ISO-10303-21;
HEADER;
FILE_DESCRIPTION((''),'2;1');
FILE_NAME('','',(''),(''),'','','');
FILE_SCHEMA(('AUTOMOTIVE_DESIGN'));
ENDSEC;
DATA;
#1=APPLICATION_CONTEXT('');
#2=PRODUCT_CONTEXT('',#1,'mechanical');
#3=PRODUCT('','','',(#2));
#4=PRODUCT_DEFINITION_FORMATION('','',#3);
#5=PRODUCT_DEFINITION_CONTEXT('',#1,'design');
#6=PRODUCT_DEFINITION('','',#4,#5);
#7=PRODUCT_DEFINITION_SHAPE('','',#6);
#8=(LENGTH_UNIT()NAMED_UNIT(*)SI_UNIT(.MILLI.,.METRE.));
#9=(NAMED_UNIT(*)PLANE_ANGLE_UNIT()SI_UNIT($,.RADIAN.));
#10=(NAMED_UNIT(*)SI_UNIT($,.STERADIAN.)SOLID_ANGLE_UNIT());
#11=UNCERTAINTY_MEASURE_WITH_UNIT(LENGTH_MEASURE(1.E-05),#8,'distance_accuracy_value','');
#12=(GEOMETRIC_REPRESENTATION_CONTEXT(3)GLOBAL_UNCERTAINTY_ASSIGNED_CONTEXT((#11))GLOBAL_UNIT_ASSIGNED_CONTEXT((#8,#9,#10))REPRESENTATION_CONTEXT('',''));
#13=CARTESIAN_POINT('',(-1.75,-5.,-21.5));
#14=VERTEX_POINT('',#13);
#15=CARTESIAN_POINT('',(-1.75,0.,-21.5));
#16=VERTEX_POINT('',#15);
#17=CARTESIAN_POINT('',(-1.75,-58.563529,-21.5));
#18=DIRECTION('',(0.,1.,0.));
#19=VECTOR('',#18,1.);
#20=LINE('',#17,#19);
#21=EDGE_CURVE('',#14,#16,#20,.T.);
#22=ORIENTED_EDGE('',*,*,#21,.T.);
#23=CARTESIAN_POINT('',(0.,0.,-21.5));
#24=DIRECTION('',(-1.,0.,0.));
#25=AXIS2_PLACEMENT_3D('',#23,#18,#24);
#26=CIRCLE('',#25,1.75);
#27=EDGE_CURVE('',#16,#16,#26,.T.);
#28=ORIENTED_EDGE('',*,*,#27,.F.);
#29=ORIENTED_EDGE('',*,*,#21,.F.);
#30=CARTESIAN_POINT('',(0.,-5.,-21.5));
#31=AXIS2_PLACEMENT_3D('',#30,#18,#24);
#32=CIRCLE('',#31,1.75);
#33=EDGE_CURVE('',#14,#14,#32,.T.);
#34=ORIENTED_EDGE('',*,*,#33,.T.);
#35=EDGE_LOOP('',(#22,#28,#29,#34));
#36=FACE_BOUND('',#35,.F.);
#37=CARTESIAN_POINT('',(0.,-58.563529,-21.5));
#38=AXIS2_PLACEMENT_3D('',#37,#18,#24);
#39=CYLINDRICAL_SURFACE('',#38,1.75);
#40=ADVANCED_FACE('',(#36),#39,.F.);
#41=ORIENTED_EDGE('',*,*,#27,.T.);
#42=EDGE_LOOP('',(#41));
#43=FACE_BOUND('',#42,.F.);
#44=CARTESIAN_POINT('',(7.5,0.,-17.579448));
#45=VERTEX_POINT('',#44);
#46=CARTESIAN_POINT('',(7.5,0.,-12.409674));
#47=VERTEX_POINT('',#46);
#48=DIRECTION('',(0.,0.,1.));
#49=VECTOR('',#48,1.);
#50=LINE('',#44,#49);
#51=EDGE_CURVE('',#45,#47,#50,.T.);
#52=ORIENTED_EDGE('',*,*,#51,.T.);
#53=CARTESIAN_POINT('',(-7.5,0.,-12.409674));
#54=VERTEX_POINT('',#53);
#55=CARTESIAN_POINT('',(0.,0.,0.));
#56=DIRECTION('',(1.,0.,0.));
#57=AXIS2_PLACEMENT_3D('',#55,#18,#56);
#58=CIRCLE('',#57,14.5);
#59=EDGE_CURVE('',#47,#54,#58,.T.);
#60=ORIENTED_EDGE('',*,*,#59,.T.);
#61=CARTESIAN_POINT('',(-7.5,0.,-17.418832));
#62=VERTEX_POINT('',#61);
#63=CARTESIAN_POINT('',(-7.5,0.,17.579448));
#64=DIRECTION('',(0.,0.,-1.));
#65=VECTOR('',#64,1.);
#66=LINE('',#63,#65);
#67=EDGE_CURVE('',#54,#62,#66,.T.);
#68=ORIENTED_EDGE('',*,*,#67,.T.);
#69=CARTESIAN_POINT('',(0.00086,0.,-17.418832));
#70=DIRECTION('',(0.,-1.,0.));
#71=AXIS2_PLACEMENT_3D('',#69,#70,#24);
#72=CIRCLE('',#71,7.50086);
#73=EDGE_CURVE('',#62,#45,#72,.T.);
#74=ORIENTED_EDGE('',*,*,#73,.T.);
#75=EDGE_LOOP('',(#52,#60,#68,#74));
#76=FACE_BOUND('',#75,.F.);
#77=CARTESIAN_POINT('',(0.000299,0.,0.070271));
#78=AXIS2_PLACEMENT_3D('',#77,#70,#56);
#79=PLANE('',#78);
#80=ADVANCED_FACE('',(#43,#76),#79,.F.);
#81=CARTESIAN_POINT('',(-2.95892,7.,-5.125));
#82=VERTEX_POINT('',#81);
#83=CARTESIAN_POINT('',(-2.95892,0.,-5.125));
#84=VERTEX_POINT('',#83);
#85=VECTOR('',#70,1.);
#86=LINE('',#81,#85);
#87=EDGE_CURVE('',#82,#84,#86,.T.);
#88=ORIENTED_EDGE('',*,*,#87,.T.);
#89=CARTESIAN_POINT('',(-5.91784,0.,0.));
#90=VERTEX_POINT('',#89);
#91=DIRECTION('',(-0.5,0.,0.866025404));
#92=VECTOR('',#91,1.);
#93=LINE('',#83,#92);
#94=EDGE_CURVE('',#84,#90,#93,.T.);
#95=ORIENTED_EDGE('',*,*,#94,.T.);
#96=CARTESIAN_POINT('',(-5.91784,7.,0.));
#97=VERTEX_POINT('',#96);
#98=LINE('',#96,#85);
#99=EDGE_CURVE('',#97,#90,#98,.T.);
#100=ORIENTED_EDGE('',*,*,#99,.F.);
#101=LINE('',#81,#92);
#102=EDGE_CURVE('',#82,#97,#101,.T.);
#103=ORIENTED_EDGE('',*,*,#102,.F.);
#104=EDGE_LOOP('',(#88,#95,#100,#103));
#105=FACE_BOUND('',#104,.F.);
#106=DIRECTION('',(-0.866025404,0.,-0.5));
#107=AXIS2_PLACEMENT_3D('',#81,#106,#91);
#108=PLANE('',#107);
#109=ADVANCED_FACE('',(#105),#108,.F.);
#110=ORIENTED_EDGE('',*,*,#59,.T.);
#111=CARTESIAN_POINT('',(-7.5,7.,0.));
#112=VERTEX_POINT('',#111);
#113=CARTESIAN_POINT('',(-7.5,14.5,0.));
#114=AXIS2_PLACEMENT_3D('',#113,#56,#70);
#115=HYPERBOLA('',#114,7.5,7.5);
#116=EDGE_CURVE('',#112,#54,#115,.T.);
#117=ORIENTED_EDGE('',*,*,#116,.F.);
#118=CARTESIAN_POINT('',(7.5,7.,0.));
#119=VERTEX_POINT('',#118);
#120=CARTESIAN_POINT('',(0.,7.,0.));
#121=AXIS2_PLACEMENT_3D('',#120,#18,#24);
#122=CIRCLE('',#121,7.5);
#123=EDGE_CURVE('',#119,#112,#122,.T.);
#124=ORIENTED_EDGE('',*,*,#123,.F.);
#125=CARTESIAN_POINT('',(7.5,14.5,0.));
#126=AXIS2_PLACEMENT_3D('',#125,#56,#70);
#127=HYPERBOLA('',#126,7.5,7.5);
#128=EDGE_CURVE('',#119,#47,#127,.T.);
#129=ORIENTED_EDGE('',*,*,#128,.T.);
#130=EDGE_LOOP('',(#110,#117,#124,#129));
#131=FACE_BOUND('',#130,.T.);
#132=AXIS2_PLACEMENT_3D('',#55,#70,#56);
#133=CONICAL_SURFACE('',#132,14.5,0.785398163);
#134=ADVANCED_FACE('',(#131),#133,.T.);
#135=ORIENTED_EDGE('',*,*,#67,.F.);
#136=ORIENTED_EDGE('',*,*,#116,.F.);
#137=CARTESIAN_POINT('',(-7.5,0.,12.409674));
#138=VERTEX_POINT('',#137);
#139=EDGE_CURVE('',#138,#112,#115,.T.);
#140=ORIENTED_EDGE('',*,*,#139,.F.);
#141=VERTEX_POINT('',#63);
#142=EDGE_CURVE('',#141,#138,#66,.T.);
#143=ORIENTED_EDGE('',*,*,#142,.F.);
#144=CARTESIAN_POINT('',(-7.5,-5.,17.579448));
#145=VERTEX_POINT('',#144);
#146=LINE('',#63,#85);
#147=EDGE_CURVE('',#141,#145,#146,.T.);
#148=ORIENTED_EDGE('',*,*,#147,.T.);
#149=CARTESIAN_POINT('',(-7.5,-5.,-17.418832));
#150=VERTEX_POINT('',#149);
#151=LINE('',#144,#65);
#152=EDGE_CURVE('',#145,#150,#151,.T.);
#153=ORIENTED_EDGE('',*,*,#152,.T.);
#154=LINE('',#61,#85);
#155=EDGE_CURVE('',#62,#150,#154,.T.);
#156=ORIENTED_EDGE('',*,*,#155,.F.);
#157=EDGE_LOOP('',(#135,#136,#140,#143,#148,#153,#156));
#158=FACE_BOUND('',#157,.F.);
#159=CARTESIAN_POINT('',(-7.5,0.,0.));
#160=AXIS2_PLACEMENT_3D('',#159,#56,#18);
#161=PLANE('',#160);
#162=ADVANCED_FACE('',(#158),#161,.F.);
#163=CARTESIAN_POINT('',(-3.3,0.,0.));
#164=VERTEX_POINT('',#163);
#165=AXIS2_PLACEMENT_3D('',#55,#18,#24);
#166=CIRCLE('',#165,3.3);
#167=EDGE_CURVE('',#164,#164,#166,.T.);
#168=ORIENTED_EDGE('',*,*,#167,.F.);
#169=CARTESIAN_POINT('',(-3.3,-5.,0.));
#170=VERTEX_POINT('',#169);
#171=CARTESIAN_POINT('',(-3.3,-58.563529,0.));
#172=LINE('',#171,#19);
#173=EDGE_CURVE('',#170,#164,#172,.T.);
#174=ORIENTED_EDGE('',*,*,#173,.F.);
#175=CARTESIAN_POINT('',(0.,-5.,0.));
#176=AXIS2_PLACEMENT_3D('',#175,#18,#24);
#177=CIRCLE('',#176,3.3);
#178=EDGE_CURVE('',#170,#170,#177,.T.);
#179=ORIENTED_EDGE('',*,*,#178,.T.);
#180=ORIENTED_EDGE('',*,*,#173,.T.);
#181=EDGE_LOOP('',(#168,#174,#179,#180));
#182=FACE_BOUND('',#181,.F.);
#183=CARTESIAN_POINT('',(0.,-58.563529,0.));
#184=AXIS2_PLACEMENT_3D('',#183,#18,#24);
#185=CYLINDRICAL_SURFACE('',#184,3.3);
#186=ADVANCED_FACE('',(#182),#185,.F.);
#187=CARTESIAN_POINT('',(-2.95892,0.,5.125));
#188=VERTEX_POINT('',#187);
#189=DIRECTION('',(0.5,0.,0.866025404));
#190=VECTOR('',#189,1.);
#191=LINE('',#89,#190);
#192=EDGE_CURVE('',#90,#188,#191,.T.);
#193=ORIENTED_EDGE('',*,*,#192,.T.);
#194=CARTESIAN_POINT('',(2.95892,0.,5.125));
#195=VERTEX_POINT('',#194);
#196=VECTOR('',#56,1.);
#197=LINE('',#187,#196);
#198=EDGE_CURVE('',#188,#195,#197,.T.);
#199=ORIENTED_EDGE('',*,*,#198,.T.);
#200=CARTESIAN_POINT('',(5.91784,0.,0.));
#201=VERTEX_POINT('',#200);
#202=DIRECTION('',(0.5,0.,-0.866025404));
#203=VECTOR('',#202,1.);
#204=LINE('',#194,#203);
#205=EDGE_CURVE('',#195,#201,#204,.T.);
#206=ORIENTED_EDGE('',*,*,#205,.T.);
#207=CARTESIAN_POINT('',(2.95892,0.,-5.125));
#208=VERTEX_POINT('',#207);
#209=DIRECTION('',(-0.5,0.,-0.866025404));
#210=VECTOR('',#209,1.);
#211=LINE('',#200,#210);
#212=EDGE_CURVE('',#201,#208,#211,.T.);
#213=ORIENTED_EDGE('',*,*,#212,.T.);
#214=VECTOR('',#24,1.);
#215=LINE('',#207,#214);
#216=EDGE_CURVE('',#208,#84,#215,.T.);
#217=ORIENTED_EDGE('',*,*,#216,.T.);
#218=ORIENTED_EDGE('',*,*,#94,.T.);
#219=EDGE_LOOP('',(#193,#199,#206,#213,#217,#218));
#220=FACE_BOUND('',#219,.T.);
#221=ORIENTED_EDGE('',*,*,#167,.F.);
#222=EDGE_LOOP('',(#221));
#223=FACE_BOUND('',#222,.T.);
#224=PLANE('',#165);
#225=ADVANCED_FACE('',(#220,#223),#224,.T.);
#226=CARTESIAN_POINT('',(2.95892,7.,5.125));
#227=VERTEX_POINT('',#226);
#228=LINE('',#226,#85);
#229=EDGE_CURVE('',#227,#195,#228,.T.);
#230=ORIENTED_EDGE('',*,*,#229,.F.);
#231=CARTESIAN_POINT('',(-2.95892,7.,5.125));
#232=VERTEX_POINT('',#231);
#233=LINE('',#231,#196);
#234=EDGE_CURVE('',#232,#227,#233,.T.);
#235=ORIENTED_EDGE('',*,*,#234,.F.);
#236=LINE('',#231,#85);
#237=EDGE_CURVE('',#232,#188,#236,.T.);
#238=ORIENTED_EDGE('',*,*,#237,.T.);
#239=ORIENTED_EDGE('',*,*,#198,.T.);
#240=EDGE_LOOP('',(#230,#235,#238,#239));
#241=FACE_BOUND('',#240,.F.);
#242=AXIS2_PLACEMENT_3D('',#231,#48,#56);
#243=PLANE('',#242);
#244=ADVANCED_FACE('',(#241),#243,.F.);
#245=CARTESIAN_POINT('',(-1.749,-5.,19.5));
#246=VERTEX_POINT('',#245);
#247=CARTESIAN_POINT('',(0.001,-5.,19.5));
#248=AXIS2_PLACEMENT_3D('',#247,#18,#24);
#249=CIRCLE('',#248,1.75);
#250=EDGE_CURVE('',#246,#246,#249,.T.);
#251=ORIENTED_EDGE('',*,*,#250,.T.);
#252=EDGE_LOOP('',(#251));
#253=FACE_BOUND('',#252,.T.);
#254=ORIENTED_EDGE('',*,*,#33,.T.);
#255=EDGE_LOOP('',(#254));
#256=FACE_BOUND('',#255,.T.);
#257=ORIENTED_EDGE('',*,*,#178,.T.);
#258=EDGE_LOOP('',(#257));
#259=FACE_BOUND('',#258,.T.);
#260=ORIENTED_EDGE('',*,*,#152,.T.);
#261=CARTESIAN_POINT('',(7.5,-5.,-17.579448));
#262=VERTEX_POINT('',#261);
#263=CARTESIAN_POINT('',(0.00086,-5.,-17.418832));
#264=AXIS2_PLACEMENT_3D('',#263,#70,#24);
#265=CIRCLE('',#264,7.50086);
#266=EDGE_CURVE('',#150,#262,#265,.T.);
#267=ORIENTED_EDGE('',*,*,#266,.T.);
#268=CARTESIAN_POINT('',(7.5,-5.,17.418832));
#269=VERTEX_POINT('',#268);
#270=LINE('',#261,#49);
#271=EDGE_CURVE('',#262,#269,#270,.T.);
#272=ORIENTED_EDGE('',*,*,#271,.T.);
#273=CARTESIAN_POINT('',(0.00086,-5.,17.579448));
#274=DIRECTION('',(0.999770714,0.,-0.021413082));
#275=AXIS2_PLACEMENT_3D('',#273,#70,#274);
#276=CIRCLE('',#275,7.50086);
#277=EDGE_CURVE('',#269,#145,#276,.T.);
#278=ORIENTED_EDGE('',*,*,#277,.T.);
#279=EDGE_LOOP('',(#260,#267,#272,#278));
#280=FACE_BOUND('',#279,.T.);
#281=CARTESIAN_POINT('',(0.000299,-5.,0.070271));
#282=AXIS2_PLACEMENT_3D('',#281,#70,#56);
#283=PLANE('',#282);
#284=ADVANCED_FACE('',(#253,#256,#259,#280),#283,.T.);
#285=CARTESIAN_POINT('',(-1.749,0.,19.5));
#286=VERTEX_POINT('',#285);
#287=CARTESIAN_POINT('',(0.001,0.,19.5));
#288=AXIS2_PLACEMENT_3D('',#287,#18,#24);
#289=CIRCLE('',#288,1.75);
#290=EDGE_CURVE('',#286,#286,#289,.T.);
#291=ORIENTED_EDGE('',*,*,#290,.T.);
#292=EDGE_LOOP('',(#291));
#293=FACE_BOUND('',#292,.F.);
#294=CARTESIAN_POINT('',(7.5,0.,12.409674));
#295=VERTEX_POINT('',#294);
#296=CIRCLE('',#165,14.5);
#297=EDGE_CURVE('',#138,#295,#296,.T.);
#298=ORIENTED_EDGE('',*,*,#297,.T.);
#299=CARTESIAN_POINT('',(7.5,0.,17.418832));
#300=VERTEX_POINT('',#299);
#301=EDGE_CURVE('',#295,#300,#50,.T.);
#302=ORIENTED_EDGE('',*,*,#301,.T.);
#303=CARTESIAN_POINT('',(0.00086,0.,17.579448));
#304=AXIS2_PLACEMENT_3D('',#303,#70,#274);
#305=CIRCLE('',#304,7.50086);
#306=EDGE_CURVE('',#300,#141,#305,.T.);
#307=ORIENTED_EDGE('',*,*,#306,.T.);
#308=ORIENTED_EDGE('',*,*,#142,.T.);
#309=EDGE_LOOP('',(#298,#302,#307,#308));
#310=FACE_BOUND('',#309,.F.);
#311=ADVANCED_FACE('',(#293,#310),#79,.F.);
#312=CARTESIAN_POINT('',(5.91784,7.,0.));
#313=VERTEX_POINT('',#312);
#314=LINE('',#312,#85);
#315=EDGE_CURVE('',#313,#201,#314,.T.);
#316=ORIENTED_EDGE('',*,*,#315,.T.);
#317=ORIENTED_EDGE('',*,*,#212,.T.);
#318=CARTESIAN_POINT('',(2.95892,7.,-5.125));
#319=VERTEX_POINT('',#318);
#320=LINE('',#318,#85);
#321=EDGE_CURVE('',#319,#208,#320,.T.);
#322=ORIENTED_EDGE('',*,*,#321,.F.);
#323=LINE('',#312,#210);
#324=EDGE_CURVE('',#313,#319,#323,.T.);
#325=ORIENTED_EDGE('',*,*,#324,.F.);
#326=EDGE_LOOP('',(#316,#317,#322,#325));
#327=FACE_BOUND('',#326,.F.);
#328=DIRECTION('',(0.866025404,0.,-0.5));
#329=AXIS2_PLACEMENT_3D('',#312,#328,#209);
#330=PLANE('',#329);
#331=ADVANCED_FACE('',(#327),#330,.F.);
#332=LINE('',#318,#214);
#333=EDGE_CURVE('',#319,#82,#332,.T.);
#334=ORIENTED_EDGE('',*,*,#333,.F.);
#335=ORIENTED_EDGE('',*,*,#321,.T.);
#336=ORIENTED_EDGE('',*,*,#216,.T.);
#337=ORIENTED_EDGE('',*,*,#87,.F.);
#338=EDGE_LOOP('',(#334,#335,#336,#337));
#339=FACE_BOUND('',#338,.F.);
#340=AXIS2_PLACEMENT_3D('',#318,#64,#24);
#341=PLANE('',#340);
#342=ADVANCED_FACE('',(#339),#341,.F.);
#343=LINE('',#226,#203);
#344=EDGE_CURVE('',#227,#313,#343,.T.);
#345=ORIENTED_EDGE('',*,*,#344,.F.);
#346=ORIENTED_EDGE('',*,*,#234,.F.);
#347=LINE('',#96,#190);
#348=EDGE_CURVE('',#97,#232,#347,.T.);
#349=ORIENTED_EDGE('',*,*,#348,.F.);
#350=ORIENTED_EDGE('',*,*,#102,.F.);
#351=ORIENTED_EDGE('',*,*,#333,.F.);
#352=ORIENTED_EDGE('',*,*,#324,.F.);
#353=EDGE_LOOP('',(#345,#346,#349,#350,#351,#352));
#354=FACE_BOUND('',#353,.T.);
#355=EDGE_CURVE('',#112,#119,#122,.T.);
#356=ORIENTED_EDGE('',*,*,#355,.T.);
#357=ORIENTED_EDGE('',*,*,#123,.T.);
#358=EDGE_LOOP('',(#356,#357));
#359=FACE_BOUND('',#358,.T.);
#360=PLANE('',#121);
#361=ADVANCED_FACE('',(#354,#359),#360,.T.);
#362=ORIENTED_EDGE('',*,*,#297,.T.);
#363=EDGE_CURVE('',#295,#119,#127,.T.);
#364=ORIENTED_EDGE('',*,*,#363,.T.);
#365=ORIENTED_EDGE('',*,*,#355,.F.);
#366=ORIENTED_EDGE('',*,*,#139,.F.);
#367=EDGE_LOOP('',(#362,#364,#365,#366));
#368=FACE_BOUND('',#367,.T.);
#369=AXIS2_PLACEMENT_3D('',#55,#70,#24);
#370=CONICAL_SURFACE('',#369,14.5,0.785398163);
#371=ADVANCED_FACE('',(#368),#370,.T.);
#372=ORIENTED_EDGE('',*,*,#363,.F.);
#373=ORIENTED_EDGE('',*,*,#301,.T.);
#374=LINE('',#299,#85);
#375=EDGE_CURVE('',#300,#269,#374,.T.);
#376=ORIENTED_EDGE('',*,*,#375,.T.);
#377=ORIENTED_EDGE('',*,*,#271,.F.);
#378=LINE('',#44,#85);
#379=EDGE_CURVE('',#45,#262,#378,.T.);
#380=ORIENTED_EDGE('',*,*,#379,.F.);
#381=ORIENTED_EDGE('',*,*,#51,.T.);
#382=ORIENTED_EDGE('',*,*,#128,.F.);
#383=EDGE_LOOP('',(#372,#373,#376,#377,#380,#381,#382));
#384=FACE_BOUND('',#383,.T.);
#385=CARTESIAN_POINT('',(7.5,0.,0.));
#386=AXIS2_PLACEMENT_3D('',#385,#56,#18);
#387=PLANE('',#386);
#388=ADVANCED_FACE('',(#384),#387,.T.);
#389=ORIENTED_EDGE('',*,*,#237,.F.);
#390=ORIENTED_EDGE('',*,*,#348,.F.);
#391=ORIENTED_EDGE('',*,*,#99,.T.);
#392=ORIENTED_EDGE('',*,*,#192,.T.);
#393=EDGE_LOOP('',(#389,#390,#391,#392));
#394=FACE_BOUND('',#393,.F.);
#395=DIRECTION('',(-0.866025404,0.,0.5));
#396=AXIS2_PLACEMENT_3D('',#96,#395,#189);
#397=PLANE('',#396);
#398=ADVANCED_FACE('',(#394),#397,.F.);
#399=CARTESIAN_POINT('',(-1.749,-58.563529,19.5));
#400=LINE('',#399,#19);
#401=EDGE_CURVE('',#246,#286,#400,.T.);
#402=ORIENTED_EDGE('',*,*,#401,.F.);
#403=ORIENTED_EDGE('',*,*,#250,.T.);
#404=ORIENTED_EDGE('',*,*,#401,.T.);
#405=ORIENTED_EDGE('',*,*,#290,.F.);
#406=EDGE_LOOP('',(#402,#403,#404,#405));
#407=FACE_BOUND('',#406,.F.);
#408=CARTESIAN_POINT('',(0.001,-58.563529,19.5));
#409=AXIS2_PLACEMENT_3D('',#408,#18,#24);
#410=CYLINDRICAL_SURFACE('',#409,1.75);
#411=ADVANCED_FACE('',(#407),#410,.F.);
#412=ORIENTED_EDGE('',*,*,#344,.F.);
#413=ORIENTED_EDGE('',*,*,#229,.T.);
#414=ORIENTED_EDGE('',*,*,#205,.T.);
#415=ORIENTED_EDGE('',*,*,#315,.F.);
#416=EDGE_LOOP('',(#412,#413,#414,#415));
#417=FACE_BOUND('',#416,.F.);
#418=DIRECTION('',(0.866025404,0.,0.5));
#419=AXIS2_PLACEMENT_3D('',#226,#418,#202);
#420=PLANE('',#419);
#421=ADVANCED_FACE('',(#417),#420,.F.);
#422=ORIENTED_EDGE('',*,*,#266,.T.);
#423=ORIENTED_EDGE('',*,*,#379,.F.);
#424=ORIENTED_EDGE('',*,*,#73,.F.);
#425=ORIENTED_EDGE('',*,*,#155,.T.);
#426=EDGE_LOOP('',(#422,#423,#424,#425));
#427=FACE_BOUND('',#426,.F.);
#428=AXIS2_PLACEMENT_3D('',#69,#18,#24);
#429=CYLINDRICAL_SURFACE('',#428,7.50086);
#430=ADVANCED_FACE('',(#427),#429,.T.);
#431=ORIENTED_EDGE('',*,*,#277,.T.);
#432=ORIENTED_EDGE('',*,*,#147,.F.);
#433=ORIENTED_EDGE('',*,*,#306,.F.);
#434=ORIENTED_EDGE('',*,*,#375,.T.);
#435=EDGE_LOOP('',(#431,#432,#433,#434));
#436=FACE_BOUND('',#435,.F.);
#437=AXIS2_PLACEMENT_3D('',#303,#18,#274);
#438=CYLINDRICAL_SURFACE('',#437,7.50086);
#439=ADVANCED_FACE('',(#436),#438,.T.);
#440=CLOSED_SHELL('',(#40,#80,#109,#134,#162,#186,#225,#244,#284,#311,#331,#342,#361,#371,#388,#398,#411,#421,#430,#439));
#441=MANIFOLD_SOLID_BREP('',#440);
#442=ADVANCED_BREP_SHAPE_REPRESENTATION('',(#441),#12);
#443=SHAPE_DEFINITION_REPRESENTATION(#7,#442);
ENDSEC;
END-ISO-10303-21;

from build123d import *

# Parameters (mm, degrees)
F1_DEPTH     = 5
F2_R         = 7.5
F3_DEPTH     = 7
F5_D         = 6.6
F7_DEPTH     = 7
F9_T4_ANGLE  = 179.9999997857
F9_T10_ANGLE = 180.0000002143
F10_D        = 3.5


# Not quite as in the source:
# - a fillet or chamfer that OpenCascade refuses, or shapes differently, is made with other operations: its cross-section is extruded or revolved along the edge and cut away or added


with BuildPart() as f1:
    # F0 (on Front) → F1 (new body)
    with BuildSketch(Plane.XZ):
        with BuildLine():
            ThreePointArc((-7.5, -17.4188318139), (-0.0794529453, -24.9192617628), (7.5, -17.5794483415))
            Line((7.5, -17.5794483415), (7.5, 17.4188318139))
            ThreePointArc((7.5, 17.4188318139), (0.0811727899, 25.0798782903), (-7.5, 17.5794483415))
            Line((-7.5, 17.5794483415), (-7.5, -17.4188318139))
        make_face()
    extrude(amount=F1_DEPTH)

    # F2 (on face) → F3 (join)
    with BuildSketch(Plane(origin=(0, 0, 0), x_dir=(-1, 0, 0), z_dir=(0, 1, 0))):
        Circle(F2_R)
    extrude(amount=F3_DEPTH)

    # F5 (through all)
    with Locations(Plane.XZ.offset(5)):
        with Locations((0, 0)):
            Hole(F5_D / 2)

    # F6 (on face) → F7 (cut, through all)
    with BuildSketch(Plane(origin=(0, 7, 0), x_dir=(-1, 0, 0), z_dir=(0, 1, 0))):
        Polygon((2.9589201296, -5.125), (5.9178402592, 0), (2.9589201296, 5.125), (-2.9589201296, 5.125), (-5.9178402592, 0), (-2.9589201296, -5.125), align=None)
    extrude(amount=-F7_DEPTH, mode=Mode.SUBTRACT)

    # F9: chamfer of 7 on 2 edges, made by hand


with BuildPart() as f9_tool2:
    # F9_s3 → F9_t4 (revolve)
    with BuildSketch(Plane.XY):
        Polygon((-14.5, 0), (-7.5, 7), (-7.5, 0), align=None)
    revolve(axis=Axis((0, 0, 0), (0, 1, 0)), revolution_arc=F9_T4_ANGLE)

    split(bisect_by=Plane.YZ.offset(-7.5), keep=Keep.TOP)

    split(bisect_by=Plane.YZ.offset(7.5), keep=Keep.BOTTOM)


with BuildPart() as f1_1:
    add(f1.part)

    # F9_t1: union F9_tool2
    add(f9_tool2.part)


with BuildPart() as f9_tool8:
    # F9_s9 → F9_t10 (revolve)
    with BuildSketch(Plane.XY):
        Polygon((14.5, 0), (7.5, 7), (7.5, 0), align=None)
    revolve(axis=Axis((0, 0, 0), (0, 1, 0)), revolution_arc=F9_T10_ANGLE)

    split(bisect_by=Plane.YZ.offset(-7.5), keep=Keep.TOP)

    split(bisect_by=Plane.YZ.offset(7.5), keep=Keep.BOTTOM)


with BuildPart() as f1_2:
    add(f1_1.part)

    # F9_t7: union F9_tool8
    add(f9_tool8.part)

    # F10 (through all)
    with Locations(Plane.XZ.offset(5)):
        with Locations((0.0010000484, 19.5), (0, -21.5)):
            Hole(F10_D / 2)


solid = f1_2.part
